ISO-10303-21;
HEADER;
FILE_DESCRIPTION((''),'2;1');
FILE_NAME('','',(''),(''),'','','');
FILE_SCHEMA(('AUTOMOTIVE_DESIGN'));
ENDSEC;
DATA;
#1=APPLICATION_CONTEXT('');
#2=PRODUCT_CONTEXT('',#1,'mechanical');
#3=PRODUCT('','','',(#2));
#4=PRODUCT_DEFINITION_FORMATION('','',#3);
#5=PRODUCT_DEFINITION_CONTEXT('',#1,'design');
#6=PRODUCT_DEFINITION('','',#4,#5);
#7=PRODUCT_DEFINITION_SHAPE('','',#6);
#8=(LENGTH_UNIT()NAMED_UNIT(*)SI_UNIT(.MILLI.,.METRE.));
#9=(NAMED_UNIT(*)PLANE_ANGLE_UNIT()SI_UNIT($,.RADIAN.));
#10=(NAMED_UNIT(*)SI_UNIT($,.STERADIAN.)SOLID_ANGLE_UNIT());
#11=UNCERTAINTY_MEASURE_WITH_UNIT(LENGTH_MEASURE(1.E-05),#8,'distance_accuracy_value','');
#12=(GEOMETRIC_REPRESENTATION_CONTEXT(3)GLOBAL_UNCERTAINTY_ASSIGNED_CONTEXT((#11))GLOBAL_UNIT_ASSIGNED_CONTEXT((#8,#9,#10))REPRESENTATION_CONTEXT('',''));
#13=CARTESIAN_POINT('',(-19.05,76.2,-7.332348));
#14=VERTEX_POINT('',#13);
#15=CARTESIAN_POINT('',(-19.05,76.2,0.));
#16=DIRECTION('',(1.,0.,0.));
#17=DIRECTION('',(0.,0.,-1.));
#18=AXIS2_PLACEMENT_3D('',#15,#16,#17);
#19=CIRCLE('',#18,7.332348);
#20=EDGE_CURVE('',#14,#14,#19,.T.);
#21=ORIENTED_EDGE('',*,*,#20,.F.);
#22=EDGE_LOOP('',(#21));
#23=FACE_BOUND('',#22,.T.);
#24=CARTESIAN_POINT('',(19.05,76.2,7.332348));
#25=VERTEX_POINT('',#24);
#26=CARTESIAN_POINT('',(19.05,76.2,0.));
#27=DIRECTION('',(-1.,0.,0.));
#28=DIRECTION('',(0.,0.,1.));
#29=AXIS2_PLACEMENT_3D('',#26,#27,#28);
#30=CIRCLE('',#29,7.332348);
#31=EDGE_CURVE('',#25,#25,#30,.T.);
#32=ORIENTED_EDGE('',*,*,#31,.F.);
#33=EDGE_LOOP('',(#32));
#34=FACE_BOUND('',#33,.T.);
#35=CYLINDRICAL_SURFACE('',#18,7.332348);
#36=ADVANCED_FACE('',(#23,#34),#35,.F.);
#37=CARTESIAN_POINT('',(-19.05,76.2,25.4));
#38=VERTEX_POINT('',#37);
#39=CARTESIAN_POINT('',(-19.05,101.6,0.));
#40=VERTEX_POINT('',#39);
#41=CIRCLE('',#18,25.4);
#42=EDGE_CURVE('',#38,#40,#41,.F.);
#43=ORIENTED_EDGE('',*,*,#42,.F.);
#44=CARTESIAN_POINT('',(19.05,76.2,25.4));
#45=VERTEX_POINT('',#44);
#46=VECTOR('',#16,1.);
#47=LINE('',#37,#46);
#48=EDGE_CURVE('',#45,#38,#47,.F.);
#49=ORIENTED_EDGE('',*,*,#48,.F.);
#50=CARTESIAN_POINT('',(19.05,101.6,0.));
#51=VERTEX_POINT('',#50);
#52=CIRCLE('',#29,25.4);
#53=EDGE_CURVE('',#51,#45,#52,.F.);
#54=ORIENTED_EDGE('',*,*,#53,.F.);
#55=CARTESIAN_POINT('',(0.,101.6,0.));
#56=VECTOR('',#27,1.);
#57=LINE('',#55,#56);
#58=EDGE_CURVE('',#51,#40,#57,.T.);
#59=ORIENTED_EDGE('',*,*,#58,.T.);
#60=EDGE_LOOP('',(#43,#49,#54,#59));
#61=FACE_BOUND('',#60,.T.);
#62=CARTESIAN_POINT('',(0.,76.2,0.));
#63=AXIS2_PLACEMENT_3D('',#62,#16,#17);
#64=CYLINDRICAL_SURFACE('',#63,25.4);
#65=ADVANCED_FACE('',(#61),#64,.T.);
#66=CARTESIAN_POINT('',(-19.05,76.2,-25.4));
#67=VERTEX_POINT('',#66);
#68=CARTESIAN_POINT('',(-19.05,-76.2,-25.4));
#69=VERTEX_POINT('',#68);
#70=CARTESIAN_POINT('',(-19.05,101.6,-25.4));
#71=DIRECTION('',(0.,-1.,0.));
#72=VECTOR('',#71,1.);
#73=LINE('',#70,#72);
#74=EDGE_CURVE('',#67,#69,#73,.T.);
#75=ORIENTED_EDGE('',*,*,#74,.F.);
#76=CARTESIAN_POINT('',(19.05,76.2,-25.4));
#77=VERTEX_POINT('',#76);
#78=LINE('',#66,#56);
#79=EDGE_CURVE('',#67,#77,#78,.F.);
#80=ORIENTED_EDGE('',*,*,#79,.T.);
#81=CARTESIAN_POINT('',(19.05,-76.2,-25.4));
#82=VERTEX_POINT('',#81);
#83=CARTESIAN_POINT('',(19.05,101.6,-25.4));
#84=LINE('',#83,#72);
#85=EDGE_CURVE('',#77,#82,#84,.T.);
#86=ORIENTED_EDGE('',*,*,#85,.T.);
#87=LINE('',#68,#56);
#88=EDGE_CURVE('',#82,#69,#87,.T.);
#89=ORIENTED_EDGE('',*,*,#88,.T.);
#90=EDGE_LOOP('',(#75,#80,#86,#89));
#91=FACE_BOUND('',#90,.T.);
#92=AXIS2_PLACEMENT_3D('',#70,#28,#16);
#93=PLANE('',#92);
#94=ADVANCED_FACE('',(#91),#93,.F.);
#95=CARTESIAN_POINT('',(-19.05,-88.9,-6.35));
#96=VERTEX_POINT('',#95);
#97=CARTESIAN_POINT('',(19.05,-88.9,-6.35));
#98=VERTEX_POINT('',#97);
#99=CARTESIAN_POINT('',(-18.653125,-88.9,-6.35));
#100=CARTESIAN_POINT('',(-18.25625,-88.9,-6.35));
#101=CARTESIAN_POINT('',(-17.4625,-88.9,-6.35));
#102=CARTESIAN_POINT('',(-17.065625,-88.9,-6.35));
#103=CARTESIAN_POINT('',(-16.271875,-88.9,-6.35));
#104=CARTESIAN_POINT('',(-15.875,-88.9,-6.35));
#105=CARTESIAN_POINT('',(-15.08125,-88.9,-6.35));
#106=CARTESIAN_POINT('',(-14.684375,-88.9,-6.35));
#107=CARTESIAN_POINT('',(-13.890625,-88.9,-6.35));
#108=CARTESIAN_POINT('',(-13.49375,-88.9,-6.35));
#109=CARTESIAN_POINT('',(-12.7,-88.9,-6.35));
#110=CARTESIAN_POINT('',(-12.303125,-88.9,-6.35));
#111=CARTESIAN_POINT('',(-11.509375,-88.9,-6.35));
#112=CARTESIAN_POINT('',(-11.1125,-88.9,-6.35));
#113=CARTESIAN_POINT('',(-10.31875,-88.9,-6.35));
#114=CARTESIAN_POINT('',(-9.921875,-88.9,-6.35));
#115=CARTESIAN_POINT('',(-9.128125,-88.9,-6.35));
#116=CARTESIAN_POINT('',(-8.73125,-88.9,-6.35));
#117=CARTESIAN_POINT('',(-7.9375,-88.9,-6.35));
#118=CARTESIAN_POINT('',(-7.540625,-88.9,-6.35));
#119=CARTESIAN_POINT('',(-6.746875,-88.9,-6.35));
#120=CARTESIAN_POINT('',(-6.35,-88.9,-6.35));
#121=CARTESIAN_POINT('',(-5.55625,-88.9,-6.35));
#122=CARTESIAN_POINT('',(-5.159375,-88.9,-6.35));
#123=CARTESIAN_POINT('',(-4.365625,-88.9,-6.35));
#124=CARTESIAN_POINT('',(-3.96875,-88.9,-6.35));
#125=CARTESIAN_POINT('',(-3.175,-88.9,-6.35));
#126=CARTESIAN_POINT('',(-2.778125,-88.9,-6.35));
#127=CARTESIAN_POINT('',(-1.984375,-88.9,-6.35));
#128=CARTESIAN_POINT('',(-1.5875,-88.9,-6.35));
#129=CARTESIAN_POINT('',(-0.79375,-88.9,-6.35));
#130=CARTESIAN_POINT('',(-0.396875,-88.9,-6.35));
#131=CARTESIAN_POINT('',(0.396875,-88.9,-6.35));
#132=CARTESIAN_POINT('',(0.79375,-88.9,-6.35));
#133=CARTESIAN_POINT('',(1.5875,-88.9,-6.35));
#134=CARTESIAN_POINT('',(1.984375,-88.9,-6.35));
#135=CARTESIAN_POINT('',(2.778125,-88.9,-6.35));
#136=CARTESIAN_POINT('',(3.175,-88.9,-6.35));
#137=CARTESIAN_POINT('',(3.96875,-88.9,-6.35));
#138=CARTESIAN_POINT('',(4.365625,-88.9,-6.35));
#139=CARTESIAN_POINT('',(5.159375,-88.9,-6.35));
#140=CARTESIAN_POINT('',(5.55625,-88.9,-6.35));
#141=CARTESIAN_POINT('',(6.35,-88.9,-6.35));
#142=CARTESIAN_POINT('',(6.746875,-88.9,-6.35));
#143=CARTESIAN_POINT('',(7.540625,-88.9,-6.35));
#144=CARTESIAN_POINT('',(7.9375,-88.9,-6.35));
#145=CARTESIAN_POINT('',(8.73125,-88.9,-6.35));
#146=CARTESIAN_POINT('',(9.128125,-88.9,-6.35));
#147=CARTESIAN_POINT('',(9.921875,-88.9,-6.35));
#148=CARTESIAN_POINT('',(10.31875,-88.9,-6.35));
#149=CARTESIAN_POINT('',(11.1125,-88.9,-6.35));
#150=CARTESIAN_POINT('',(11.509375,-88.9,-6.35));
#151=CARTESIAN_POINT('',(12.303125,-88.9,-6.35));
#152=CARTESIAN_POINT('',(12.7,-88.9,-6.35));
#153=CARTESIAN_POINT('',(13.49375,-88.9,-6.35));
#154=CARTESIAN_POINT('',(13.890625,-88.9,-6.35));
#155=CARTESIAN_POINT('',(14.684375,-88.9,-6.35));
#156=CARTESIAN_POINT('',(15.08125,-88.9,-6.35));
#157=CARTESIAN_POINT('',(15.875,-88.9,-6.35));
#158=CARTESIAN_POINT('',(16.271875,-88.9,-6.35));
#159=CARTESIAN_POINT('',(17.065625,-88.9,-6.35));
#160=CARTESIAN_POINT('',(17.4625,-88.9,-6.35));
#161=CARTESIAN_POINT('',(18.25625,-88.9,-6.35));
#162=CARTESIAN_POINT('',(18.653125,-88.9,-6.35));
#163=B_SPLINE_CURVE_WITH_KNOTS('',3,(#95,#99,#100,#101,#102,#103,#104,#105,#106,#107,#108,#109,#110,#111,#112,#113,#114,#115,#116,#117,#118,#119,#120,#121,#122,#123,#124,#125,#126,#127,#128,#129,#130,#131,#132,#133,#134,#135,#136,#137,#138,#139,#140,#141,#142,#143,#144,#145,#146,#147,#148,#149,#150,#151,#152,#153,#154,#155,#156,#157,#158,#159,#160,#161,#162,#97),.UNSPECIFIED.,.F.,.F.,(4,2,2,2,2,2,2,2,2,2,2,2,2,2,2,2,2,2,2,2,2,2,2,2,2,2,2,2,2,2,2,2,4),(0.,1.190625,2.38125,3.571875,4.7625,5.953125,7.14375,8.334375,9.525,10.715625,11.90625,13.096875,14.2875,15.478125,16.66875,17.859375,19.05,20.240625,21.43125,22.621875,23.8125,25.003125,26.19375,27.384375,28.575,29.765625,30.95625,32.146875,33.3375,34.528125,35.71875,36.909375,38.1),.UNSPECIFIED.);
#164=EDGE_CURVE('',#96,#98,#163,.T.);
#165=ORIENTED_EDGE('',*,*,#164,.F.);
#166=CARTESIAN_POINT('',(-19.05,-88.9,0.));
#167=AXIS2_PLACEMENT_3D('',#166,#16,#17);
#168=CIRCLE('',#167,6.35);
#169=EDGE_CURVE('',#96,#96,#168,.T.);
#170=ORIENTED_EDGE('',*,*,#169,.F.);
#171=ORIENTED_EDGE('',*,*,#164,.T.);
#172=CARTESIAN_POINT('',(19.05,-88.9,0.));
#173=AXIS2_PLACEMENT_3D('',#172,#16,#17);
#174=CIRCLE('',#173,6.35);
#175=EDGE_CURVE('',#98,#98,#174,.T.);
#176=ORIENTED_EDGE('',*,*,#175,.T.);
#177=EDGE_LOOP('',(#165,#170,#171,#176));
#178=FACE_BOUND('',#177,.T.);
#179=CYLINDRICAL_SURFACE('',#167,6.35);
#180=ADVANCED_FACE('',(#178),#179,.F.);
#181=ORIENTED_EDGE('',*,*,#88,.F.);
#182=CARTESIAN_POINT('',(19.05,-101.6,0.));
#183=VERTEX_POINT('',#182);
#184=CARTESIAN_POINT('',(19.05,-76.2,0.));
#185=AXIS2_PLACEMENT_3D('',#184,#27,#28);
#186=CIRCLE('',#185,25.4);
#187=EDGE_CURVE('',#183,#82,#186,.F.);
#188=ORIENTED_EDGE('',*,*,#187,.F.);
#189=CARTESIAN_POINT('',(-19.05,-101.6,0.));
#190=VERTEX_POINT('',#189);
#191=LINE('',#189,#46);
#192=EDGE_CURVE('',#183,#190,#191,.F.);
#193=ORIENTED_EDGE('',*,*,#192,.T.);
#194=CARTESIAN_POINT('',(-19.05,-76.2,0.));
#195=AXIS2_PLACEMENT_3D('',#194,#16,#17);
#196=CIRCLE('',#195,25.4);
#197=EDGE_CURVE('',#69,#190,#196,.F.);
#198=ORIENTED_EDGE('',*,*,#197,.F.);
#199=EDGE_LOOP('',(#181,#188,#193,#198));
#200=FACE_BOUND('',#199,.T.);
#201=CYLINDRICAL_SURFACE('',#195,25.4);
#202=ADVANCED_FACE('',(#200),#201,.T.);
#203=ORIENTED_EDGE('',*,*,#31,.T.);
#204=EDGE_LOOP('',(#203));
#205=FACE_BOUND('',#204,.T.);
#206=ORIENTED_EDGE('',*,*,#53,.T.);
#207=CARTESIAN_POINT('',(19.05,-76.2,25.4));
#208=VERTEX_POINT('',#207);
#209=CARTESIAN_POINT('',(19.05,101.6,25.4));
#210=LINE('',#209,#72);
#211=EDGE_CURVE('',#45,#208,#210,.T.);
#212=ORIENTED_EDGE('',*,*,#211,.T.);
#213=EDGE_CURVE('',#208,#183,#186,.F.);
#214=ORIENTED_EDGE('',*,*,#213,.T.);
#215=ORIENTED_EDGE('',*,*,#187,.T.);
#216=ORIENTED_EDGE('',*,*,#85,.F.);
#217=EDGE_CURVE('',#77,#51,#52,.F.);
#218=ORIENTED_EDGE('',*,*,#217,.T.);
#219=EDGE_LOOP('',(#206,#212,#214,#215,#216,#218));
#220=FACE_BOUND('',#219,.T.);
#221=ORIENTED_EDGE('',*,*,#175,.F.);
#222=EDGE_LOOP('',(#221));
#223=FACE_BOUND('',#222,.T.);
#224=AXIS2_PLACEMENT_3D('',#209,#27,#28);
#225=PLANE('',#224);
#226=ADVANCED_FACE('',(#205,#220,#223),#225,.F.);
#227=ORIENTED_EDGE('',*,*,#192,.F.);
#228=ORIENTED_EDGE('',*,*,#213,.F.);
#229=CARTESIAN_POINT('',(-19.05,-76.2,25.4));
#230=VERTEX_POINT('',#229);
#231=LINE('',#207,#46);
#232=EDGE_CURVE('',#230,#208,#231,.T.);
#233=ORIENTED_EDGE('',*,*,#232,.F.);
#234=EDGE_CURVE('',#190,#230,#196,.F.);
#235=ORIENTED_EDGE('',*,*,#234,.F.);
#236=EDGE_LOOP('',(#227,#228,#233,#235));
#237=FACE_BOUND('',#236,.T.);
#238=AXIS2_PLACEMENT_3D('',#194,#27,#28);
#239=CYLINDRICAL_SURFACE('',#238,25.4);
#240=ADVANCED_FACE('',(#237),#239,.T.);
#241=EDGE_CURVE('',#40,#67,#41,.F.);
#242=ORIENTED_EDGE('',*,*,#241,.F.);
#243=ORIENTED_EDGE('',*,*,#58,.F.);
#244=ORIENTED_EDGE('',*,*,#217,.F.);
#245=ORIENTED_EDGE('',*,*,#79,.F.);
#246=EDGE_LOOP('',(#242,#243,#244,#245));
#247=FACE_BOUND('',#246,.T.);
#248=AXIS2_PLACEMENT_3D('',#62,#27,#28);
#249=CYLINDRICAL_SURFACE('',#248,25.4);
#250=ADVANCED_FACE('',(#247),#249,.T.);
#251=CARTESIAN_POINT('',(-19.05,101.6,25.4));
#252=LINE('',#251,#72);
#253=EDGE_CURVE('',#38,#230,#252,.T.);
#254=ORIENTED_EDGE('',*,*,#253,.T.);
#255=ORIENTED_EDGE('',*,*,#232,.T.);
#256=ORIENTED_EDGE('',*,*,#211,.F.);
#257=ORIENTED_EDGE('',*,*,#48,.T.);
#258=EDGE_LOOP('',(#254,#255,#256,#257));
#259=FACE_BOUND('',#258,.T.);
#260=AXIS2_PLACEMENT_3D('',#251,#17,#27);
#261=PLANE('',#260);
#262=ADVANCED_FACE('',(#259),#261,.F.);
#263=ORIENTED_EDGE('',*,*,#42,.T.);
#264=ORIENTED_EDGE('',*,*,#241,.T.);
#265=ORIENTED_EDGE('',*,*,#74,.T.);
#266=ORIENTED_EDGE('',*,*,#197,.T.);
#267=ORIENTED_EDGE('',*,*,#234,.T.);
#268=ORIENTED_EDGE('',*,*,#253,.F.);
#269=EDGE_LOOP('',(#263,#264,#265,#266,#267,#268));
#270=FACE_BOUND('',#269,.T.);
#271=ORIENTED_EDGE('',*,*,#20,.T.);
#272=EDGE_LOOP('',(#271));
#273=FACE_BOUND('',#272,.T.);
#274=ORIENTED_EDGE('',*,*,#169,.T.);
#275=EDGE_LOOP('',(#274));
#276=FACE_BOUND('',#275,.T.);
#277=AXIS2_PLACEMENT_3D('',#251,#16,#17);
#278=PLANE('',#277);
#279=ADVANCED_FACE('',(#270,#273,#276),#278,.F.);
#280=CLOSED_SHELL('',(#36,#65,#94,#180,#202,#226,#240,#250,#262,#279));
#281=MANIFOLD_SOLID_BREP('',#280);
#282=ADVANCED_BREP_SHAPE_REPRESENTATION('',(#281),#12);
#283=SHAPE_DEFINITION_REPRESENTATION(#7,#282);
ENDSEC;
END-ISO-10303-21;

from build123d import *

# Parameters (mm, degrees)
SKETCH1_W           = 38.1
SKETCH1_H           = 50.8
BOSS_EXTRUDE1_DEPTH = 101.6
SKETCH2_R           = 6.35
CUT_EXTRUDE1_DEPTH  = 112.44204772
FILLET1_R           = 25.4
SKETCH3_R           = 7.332348419
CUT_EXTRUDE2_DEPTH  = 441.771925846


with BuildPart() as part:
    # Sketch1 → Boss-Extrude1 (new, symmetric)
    with BuildSketch(Plane(origin=(0, 0, 0), x_dir=(1, 0, 0), z_dir=(0, 1, 0))):
        Rectangle(SKETCH1_W, SKETCH1_H)
    extrude(amount=BOSS_EXTRUDE1_DEPTH, both=True)

    # Sketch2 → Cut-Extrude1 (cut, through all)
    with BuildSketch(Plane(origin=(19.05, 0, 0), x_dir=(0, 0, -1), z_dir=(1, 0, 0))):
        with Locations((0, -88.9)):
            Circle(SKETCH2_R)
    extrude(amount=-CUT_EXTRUDE1_DEPTH, mode=Mode.SUBTRACT)

    # Fillet1
    fillet1_edges = [part.edges().sort_by_distance(p)[0] for p in [
        (0, -101.6, -25.4),
        (0, -101.6, 25.4),
        (0, 101.6, 25.4),
        (0, 101.6, -25.4),
    ]]
    fillet(fillet1_edges, radius=FILLET1_R - 0.0001)  # a hair under: the kernel refuses the full size

    # Sketch3 → Cut-Extrude2 (cut, through all)
    with BuildSketch(Plane(origin=(292.1, -73.474884434, -233.084724799), x_dir=(0, 0.5719099585576003, -0.8203164019466171), z_dir=(1, 0, 0))):
        with Locations(Location((-105.602665842, 256.084237961, 0), (0, 0, 325.116479352))):
            Circle(SKETCH3_R)
    extrude(amount=-CUT_EXTRUDE2_DEPTH, mode=Mode.SUBTRACT)


solid = part.part
